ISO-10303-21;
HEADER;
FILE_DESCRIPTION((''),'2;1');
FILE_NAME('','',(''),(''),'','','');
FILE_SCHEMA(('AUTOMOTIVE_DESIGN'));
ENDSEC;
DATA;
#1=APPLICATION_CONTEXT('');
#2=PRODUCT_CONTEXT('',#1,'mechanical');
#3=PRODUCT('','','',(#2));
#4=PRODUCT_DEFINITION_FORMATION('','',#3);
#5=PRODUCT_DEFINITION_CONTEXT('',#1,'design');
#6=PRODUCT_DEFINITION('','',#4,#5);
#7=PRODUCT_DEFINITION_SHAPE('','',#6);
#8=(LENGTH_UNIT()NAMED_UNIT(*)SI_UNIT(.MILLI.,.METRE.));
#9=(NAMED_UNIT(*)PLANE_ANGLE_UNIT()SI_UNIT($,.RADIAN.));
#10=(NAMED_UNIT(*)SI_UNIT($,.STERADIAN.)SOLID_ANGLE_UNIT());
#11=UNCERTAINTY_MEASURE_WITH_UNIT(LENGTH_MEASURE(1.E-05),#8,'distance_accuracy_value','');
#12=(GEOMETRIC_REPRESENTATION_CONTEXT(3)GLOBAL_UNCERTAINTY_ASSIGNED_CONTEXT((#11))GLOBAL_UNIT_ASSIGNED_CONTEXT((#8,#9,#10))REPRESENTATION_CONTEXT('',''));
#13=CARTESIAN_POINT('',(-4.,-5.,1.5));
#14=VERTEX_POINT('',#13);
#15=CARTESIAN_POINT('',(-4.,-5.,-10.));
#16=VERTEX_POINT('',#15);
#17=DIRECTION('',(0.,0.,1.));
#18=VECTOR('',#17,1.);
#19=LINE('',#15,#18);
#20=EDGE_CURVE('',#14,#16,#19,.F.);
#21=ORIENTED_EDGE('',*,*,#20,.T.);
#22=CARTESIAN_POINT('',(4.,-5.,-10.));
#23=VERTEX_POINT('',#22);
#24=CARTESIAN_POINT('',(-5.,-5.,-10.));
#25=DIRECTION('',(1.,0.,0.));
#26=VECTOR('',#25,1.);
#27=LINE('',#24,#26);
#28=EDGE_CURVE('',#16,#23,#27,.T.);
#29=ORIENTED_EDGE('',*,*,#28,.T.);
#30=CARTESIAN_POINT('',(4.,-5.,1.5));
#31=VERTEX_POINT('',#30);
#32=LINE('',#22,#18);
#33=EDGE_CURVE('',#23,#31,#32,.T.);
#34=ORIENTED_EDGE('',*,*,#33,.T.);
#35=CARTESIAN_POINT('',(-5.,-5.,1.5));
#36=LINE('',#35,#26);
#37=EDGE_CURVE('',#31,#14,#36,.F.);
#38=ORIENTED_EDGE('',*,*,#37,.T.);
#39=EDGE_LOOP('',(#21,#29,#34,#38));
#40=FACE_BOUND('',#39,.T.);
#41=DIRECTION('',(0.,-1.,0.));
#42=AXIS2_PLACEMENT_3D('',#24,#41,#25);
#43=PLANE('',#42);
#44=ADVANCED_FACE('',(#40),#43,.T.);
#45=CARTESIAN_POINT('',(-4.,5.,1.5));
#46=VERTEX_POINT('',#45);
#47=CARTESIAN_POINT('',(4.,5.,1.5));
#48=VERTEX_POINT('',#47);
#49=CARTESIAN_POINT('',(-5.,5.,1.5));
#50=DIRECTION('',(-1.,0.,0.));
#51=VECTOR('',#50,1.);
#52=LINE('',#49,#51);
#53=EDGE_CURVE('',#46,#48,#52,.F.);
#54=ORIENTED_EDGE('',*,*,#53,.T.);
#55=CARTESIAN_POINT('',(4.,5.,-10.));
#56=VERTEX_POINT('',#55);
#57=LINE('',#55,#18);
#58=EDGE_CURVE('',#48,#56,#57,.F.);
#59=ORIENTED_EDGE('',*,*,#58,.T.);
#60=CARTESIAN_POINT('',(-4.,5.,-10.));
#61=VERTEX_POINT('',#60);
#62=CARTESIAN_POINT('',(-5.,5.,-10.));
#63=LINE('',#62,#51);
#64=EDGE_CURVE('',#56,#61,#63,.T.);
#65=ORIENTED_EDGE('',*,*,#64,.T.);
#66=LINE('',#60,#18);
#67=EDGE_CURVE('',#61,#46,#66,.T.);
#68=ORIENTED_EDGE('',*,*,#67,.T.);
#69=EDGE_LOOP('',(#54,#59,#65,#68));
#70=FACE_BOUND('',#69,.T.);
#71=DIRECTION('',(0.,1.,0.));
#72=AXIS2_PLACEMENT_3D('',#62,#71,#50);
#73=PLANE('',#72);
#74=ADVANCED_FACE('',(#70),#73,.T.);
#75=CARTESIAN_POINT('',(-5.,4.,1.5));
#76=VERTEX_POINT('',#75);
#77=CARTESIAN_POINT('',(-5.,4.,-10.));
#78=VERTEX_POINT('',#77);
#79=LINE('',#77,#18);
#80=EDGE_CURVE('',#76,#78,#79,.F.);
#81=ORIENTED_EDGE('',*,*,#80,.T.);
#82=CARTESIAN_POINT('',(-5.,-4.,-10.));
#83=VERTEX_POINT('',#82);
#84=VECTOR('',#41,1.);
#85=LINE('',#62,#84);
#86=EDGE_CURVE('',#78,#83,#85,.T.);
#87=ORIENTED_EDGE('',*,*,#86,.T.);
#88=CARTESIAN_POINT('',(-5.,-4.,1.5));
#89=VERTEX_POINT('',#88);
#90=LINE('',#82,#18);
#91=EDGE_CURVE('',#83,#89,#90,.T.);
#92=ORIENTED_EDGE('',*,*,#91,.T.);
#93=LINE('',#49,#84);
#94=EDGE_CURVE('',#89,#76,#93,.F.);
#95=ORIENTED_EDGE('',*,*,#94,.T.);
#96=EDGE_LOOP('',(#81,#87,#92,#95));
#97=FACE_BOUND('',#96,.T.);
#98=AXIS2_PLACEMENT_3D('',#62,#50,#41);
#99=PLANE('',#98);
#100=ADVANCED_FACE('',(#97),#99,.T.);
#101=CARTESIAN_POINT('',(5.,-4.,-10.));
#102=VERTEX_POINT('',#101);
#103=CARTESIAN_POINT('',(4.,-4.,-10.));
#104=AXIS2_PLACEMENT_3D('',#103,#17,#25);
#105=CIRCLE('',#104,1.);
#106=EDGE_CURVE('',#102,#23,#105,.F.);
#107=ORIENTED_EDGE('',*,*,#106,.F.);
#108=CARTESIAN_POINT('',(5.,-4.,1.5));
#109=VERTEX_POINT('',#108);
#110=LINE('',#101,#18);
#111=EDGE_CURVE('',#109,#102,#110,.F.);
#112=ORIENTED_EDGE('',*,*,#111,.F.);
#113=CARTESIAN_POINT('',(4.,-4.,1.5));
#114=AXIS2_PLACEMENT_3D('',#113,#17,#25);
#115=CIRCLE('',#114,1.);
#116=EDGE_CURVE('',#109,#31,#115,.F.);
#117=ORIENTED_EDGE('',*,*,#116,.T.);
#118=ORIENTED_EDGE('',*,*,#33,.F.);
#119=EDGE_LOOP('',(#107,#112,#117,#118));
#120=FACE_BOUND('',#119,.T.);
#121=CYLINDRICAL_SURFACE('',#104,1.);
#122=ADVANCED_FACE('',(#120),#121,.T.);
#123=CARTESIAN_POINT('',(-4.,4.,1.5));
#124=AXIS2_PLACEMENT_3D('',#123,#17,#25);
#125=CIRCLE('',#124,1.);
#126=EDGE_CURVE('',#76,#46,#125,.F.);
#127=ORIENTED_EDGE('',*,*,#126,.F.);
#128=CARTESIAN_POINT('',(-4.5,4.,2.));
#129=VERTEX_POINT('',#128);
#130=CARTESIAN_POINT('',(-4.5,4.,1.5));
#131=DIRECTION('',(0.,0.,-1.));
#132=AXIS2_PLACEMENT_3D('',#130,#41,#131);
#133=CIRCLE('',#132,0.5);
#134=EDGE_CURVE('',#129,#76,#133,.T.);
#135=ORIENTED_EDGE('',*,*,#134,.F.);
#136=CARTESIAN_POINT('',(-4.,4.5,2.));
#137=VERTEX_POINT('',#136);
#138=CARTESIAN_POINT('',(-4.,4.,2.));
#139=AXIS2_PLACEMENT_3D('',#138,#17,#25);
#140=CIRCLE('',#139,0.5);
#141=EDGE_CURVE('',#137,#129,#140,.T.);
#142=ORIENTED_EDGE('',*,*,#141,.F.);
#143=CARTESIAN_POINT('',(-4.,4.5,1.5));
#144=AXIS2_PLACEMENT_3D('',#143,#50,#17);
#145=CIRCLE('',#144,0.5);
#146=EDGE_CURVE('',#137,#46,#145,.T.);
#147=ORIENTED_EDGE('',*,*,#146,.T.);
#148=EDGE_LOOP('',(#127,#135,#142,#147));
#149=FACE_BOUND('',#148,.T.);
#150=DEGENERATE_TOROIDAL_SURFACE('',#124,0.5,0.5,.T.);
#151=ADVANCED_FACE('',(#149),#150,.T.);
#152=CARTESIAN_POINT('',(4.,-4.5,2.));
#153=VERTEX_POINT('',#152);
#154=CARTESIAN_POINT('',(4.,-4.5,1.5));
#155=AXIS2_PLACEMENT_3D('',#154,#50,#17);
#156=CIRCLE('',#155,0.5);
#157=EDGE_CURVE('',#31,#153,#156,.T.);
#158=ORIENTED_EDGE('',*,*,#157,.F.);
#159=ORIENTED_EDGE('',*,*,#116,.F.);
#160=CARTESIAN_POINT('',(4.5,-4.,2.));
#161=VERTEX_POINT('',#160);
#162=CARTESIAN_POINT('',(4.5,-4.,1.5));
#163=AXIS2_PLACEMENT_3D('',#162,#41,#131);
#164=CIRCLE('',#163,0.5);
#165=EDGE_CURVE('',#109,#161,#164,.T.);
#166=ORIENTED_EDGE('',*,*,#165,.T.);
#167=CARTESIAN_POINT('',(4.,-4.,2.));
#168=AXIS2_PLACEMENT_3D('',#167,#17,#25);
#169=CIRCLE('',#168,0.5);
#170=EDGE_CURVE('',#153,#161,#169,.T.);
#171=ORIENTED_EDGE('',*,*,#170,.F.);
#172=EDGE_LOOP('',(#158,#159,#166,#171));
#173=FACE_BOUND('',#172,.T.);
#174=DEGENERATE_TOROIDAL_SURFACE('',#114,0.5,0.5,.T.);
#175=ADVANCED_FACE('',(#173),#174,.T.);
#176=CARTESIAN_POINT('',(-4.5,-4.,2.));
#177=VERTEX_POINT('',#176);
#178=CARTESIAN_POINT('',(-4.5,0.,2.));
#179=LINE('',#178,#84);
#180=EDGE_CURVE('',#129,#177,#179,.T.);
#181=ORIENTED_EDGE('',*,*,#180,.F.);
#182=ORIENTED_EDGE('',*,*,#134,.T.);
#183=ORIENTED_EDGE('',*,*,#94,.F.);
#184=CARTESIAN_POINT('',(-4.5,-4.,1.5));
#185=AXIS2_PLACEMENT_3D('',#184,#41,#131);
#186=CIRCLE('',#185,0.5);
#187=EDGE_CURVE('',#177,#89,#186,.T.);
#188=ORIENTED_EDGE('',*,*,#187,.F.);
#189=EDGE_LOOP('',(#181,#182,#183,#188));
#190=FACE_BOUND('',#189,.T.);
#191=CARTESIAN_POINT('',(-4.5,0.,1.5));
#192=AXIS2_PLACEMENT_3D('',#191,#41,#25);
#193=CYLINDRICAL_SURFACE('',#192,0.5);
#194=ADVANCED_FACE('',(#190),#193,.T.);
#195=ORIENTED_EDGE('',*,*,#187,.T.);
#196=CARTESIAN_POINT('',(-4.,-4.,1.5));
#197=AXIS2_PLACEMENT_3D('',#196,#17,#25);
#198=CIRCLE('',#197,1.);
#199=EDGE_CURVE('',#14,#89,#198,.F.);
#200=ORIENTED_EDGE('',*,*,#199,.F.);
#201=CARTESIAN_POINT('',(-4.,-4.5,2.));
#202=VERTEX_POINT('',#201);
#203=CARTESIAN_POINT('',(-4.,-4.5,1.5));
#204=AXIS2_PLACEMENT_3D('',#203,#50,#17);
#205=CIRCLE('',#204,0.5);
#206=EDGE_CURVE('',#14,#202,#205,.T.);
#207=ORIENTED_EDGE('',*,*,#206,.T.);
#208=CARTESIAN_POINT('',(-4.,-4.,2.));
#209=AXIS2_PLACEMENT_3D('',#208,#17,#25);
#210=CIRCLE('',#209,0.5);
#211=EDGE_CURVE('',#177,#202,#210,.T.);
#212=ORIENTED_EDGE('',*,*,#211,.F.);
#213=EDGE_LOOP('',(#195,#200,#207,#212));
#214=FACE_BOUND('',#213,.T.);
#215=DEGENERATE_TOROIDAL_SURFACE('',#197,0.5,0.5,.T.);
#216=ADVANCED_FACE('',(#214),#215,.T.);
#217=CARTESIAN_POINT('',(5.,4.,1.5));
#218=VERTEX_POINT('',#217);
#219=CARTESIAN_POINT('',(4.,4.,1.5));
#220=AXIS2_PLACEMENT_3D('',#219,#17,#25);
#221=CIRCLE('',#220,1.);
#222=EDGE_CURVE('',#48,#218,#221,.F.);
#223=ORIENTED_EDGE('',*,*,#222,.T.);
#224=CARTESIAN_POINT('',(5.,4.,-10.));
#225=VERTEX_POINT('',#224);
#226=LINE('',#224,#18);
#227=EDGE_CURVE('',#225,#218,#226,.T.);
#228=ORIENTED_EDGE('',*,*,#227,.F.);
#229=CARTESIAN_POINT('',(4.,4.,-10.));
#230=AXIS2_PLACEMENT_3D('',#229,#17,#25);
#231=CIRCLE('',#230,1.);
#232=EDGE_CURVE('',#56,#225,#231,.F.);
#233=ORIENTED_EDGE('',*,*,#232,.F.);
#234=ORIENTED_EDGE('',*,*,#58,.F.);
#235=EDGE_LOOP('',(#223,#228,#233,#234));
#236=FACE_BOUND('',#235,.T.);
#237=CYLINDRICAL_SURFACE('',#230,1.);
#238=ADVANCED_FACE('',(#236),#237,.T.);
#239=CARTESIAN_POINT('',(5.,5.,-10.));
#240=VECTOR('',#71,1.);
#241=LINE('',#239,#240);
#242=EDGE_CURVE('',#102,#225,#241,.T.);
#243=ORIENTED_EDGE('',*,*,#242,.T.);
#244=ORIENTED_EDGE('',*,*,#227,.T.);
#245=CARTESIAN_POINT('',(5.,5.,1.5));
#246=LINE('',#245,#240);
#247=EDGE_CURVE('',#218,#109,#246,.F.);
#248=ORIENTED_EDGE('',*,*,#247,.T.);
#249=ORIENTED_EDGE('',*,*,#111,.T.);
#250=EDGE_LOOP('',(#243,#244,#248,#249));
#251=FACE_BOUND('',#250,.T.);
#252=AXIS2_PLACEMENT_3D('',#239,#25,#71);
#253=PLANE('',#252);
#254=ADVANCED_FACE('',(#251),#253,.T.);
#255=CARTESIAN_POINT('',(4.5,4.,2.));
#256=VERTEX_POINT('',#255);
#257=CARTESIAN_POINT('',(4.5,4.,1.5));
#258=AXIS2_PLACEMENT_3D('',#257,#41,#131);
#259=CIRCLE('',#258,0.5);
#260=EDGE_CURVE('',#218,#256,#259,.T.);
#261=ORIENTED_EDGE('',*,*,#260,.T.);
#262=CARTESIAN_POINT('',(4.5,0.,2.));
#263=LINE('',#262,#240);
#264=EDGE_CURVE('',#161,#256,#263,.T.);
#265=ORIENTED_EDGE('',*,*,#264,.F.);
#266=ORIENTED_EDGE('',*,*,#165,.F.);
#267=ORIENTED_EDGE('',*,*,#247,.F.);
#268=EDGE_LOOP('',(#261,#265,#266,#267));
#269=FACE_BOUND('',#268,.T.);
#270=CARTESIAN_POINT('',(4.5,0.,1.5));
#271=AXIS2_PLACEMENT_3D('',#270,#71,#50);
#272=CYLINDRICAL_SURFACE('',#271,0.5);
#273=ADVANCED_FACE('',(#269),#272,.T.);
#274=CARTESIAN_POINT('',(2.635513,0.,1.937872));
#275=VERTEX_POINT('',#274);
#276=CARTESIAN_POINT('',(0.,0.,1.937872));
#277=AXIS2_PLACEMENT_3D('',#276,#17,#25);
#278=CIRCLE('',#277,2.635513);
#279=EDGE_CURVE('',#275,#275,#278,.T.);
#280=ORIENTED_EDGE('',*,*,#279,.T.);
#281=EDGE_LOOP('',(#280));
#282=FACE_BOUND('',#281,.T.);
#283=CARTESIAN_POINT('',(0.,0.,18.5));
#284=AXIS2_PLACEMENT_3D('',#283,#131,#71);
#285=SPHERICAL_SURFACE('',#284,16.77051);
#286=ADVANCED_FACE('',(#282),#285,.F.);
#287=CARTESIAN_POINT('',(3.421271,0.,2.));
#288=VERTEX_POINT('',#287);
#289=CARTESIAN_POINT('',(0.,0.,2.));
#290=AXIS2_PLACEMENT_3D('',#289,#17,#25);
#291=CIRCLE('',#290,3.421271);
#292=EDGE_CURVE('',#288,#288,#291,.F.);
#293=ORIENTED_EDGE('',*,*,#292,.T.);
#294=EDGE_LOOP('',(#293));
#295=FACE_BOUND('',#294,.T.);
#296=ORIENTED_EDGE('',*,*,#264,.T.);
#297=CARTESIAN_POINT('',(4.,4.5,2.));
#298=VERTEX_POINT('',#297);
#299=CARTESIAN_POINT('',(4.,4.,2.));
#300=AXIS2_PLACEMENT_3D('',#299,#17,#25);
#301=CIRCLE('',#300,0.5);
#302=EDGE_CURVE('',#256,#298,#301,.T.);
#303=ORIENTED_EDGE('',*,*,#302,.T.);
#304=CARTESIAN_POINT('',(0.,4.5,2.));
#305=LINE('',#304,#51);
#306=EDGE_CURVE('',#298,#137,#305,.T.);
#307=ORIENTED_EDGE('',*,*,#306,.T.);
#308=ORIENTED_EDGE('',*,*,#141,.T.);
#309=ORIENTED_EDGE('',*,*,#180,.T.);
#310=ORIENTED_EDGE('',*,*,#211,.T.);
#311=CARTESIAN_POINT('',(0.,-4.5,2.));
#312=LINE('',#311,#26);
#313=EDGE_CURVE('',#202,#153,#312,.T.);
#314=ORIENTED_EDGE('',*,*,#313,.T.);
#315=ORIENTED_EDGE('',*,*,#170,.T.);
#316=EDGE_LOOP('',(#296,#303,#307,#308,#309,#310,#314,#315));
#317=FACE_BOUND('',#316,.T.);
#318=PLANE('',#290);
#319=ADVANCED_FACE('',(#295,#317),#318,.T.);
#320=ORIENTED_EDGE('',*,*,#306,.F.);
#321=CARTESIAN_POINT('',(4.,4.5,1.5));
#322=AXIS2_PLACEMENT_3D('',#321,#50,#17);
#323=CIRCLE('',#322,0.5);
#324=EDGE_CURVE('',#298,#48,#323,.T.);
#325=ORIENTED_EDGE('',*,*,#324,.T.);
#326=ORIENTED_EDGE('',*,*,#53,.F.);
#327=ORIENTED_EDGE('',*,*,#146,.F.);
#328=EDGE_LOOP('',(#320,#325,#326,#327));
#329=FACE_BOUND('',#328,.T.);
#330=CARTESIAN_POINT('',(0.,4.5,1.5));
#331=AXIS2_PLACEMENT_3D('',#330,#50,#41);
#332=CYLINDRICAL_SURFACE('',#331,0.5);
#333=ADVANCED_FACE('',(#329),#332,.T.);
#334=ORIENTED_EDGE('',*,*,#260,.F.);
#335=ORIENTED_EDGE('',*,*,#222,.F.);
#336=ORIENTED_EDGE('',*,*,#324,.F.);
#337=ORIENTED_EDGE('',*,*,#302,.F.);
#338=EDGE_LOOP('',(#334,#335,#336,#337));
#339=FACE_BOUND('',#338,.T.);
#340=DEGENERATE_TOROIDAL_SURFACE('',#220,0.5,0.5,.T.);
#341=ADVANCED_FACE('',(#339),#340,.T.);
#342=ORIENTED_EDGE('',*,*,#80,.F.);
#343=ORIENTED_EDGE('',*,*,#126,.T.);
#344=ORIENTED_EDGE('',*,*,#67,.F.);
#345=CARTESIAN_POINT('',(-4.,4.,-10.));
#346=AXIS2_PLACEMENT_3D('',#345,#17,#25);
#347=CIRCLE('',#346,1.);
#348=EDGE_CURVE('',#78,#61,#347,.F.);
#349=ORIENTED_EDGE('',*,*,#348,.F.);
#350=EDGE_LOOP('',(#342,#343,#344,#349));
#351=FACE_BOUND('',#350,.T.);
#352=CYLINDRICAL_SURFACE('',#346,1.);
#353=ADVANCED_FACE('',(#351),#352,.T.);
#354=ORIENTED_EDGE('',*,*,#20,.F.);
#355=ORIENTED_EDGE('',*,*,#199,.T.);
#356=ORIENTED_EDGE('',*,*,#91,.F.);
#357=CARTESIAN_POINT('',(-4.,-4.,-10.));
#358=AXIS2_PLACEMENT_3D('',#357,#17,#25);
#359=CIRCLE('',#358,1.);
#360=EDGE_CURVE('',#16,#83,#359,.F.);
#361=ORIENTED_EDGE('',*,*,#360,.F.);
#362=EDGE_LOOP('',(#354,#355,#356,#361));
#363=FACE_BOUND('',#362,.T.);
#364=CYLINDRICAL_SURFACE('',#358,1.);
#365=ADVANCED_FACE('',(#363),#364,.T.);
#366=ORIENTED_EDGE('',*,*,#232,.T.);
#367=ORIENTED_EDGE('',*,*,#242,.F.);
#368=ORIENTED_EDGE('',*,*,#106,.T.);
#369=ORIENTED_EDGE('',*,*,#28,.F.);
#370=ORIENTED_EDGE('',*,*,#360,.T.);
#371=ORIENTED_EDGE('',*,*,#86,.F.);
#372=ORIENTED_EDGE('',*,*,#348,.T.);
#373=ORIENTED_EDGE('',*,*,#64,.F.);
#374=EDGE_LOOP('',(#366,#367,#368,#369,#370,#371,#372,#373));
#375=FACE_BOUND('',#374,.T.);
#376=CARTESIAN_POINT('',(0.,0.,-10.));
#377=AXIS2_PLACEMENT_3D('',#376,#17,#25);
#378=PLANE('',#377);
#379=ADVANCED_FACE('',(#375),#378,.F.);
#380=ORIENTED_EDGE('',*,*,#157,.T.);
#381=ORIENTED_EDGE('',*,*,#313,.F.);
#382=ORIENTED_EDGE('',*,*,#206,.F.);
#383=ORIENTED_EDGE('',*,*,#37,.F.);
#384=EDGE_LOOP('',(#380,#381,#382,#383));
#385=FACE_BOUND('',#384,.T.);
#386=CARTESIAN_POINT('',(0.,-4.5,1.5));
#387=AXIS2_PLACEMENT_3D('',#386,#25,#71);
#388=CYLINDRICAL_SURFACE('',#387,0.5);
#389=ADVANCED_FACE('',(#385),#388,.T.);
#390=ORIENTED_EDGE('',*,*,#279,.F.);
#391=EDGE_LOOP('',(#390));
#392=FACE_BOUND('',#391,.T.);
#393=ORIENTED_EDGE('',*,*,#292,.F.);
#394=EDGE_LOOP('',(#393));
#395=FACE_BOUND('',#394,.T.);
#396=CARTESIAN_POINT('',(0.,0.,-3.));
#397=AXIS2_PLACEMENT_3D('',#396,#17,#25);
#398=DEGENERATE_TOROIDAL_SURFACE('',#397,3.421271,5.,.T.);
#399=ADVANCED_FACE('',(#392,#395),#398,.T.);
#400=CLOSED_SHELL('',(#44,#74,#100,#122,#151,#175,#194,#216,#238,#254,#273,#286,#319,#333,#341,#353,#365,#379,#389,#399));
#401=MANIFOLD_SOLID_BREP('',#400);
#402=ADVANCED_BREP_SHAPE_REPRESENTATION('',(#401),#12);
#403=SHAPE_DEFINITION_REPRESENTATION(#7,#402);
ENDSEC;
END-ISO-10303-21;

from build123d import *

# Parameters (mm, degrees)
EXTRUDE_1_DEPTH      = 5
EXTRUDE_1_DEPTH_BACK = 7
SKETCH_1_W           = 10
SKETCH_1_H           = 10
FILLET_1_R           = 1
FILLET_2_R           = 0.5
FILLET_3_R           = 5


with BuildPart() as part:
    # Эскиз1 → Бобышка-Вытянуть1 (new, two sides: drawn at the far end of the back side and taken through both)
    with BuildSketch(Plane.XY.offset(-3).offset(-EXTRUDE_1_DEPTH_BACK)):
        Rectangle(SKETCH_1_W, SKETCH_1_H)
    extrude(amount=EXTRUDE_1_DEPTH + EXTRUDE_1_DEPTH_BACK)

    # Скругление1
    fillet_1_edges = [part.edges().sort_by_distance(p)[0] for p in [
        (5, -5, -4),
        (-5, -5, -4),
        (-5, 5, -4),
        (5, 5, -4),
    ]]
    fillet(fillet_1_edges, radius=FILLET_1_R)

    # Скругление2
    fillet_2_edges = [part.edges().sort_by_distance(p)[0] for p in [
        (-4.707106781, -4.707106781, 2),
        (-5, 0, 2),
        (-4.707106781, 4.707106781, 2),
        (0, 5, 2),
        (4.707106781, 4.707106781, 2),
        (5, 0, 2),
        (4.707106781, -4.707106781, 2),
        (0, -5, 2),
    ]]
    fillet(fillet_2_edges, radius=FILLET_2_R)

    # Эскиз2 → Вырез-Повернуть2 (revolve, cut)
    with BuildSketch(Plane(origin=(0, 0, 0), x_dir=(0, 0, -1), z_dir=(1, 0, 0))):
        with BuildLine():
            ThreePointArc((-1.729490169, 0), (-1.797254534, 1.506085619), (-2, 3))
            Line((-2, 3), (-2, 0))
            Line((-2, 0), (-1.729490169, 0))
        make_face()
    revolve(axis=Axis((0, 0, 0), (0, 0, 1)), mode=Mode.SUBTRACT)

    # Скругление3
    fillet_3_edges = [part.edges().sort_by_distance(p)[0] for p in [
        (0, -3, 2),
    ]]
    fillet(fillet_3_edges, radius=FILLET_3_R)


solid = part.part
